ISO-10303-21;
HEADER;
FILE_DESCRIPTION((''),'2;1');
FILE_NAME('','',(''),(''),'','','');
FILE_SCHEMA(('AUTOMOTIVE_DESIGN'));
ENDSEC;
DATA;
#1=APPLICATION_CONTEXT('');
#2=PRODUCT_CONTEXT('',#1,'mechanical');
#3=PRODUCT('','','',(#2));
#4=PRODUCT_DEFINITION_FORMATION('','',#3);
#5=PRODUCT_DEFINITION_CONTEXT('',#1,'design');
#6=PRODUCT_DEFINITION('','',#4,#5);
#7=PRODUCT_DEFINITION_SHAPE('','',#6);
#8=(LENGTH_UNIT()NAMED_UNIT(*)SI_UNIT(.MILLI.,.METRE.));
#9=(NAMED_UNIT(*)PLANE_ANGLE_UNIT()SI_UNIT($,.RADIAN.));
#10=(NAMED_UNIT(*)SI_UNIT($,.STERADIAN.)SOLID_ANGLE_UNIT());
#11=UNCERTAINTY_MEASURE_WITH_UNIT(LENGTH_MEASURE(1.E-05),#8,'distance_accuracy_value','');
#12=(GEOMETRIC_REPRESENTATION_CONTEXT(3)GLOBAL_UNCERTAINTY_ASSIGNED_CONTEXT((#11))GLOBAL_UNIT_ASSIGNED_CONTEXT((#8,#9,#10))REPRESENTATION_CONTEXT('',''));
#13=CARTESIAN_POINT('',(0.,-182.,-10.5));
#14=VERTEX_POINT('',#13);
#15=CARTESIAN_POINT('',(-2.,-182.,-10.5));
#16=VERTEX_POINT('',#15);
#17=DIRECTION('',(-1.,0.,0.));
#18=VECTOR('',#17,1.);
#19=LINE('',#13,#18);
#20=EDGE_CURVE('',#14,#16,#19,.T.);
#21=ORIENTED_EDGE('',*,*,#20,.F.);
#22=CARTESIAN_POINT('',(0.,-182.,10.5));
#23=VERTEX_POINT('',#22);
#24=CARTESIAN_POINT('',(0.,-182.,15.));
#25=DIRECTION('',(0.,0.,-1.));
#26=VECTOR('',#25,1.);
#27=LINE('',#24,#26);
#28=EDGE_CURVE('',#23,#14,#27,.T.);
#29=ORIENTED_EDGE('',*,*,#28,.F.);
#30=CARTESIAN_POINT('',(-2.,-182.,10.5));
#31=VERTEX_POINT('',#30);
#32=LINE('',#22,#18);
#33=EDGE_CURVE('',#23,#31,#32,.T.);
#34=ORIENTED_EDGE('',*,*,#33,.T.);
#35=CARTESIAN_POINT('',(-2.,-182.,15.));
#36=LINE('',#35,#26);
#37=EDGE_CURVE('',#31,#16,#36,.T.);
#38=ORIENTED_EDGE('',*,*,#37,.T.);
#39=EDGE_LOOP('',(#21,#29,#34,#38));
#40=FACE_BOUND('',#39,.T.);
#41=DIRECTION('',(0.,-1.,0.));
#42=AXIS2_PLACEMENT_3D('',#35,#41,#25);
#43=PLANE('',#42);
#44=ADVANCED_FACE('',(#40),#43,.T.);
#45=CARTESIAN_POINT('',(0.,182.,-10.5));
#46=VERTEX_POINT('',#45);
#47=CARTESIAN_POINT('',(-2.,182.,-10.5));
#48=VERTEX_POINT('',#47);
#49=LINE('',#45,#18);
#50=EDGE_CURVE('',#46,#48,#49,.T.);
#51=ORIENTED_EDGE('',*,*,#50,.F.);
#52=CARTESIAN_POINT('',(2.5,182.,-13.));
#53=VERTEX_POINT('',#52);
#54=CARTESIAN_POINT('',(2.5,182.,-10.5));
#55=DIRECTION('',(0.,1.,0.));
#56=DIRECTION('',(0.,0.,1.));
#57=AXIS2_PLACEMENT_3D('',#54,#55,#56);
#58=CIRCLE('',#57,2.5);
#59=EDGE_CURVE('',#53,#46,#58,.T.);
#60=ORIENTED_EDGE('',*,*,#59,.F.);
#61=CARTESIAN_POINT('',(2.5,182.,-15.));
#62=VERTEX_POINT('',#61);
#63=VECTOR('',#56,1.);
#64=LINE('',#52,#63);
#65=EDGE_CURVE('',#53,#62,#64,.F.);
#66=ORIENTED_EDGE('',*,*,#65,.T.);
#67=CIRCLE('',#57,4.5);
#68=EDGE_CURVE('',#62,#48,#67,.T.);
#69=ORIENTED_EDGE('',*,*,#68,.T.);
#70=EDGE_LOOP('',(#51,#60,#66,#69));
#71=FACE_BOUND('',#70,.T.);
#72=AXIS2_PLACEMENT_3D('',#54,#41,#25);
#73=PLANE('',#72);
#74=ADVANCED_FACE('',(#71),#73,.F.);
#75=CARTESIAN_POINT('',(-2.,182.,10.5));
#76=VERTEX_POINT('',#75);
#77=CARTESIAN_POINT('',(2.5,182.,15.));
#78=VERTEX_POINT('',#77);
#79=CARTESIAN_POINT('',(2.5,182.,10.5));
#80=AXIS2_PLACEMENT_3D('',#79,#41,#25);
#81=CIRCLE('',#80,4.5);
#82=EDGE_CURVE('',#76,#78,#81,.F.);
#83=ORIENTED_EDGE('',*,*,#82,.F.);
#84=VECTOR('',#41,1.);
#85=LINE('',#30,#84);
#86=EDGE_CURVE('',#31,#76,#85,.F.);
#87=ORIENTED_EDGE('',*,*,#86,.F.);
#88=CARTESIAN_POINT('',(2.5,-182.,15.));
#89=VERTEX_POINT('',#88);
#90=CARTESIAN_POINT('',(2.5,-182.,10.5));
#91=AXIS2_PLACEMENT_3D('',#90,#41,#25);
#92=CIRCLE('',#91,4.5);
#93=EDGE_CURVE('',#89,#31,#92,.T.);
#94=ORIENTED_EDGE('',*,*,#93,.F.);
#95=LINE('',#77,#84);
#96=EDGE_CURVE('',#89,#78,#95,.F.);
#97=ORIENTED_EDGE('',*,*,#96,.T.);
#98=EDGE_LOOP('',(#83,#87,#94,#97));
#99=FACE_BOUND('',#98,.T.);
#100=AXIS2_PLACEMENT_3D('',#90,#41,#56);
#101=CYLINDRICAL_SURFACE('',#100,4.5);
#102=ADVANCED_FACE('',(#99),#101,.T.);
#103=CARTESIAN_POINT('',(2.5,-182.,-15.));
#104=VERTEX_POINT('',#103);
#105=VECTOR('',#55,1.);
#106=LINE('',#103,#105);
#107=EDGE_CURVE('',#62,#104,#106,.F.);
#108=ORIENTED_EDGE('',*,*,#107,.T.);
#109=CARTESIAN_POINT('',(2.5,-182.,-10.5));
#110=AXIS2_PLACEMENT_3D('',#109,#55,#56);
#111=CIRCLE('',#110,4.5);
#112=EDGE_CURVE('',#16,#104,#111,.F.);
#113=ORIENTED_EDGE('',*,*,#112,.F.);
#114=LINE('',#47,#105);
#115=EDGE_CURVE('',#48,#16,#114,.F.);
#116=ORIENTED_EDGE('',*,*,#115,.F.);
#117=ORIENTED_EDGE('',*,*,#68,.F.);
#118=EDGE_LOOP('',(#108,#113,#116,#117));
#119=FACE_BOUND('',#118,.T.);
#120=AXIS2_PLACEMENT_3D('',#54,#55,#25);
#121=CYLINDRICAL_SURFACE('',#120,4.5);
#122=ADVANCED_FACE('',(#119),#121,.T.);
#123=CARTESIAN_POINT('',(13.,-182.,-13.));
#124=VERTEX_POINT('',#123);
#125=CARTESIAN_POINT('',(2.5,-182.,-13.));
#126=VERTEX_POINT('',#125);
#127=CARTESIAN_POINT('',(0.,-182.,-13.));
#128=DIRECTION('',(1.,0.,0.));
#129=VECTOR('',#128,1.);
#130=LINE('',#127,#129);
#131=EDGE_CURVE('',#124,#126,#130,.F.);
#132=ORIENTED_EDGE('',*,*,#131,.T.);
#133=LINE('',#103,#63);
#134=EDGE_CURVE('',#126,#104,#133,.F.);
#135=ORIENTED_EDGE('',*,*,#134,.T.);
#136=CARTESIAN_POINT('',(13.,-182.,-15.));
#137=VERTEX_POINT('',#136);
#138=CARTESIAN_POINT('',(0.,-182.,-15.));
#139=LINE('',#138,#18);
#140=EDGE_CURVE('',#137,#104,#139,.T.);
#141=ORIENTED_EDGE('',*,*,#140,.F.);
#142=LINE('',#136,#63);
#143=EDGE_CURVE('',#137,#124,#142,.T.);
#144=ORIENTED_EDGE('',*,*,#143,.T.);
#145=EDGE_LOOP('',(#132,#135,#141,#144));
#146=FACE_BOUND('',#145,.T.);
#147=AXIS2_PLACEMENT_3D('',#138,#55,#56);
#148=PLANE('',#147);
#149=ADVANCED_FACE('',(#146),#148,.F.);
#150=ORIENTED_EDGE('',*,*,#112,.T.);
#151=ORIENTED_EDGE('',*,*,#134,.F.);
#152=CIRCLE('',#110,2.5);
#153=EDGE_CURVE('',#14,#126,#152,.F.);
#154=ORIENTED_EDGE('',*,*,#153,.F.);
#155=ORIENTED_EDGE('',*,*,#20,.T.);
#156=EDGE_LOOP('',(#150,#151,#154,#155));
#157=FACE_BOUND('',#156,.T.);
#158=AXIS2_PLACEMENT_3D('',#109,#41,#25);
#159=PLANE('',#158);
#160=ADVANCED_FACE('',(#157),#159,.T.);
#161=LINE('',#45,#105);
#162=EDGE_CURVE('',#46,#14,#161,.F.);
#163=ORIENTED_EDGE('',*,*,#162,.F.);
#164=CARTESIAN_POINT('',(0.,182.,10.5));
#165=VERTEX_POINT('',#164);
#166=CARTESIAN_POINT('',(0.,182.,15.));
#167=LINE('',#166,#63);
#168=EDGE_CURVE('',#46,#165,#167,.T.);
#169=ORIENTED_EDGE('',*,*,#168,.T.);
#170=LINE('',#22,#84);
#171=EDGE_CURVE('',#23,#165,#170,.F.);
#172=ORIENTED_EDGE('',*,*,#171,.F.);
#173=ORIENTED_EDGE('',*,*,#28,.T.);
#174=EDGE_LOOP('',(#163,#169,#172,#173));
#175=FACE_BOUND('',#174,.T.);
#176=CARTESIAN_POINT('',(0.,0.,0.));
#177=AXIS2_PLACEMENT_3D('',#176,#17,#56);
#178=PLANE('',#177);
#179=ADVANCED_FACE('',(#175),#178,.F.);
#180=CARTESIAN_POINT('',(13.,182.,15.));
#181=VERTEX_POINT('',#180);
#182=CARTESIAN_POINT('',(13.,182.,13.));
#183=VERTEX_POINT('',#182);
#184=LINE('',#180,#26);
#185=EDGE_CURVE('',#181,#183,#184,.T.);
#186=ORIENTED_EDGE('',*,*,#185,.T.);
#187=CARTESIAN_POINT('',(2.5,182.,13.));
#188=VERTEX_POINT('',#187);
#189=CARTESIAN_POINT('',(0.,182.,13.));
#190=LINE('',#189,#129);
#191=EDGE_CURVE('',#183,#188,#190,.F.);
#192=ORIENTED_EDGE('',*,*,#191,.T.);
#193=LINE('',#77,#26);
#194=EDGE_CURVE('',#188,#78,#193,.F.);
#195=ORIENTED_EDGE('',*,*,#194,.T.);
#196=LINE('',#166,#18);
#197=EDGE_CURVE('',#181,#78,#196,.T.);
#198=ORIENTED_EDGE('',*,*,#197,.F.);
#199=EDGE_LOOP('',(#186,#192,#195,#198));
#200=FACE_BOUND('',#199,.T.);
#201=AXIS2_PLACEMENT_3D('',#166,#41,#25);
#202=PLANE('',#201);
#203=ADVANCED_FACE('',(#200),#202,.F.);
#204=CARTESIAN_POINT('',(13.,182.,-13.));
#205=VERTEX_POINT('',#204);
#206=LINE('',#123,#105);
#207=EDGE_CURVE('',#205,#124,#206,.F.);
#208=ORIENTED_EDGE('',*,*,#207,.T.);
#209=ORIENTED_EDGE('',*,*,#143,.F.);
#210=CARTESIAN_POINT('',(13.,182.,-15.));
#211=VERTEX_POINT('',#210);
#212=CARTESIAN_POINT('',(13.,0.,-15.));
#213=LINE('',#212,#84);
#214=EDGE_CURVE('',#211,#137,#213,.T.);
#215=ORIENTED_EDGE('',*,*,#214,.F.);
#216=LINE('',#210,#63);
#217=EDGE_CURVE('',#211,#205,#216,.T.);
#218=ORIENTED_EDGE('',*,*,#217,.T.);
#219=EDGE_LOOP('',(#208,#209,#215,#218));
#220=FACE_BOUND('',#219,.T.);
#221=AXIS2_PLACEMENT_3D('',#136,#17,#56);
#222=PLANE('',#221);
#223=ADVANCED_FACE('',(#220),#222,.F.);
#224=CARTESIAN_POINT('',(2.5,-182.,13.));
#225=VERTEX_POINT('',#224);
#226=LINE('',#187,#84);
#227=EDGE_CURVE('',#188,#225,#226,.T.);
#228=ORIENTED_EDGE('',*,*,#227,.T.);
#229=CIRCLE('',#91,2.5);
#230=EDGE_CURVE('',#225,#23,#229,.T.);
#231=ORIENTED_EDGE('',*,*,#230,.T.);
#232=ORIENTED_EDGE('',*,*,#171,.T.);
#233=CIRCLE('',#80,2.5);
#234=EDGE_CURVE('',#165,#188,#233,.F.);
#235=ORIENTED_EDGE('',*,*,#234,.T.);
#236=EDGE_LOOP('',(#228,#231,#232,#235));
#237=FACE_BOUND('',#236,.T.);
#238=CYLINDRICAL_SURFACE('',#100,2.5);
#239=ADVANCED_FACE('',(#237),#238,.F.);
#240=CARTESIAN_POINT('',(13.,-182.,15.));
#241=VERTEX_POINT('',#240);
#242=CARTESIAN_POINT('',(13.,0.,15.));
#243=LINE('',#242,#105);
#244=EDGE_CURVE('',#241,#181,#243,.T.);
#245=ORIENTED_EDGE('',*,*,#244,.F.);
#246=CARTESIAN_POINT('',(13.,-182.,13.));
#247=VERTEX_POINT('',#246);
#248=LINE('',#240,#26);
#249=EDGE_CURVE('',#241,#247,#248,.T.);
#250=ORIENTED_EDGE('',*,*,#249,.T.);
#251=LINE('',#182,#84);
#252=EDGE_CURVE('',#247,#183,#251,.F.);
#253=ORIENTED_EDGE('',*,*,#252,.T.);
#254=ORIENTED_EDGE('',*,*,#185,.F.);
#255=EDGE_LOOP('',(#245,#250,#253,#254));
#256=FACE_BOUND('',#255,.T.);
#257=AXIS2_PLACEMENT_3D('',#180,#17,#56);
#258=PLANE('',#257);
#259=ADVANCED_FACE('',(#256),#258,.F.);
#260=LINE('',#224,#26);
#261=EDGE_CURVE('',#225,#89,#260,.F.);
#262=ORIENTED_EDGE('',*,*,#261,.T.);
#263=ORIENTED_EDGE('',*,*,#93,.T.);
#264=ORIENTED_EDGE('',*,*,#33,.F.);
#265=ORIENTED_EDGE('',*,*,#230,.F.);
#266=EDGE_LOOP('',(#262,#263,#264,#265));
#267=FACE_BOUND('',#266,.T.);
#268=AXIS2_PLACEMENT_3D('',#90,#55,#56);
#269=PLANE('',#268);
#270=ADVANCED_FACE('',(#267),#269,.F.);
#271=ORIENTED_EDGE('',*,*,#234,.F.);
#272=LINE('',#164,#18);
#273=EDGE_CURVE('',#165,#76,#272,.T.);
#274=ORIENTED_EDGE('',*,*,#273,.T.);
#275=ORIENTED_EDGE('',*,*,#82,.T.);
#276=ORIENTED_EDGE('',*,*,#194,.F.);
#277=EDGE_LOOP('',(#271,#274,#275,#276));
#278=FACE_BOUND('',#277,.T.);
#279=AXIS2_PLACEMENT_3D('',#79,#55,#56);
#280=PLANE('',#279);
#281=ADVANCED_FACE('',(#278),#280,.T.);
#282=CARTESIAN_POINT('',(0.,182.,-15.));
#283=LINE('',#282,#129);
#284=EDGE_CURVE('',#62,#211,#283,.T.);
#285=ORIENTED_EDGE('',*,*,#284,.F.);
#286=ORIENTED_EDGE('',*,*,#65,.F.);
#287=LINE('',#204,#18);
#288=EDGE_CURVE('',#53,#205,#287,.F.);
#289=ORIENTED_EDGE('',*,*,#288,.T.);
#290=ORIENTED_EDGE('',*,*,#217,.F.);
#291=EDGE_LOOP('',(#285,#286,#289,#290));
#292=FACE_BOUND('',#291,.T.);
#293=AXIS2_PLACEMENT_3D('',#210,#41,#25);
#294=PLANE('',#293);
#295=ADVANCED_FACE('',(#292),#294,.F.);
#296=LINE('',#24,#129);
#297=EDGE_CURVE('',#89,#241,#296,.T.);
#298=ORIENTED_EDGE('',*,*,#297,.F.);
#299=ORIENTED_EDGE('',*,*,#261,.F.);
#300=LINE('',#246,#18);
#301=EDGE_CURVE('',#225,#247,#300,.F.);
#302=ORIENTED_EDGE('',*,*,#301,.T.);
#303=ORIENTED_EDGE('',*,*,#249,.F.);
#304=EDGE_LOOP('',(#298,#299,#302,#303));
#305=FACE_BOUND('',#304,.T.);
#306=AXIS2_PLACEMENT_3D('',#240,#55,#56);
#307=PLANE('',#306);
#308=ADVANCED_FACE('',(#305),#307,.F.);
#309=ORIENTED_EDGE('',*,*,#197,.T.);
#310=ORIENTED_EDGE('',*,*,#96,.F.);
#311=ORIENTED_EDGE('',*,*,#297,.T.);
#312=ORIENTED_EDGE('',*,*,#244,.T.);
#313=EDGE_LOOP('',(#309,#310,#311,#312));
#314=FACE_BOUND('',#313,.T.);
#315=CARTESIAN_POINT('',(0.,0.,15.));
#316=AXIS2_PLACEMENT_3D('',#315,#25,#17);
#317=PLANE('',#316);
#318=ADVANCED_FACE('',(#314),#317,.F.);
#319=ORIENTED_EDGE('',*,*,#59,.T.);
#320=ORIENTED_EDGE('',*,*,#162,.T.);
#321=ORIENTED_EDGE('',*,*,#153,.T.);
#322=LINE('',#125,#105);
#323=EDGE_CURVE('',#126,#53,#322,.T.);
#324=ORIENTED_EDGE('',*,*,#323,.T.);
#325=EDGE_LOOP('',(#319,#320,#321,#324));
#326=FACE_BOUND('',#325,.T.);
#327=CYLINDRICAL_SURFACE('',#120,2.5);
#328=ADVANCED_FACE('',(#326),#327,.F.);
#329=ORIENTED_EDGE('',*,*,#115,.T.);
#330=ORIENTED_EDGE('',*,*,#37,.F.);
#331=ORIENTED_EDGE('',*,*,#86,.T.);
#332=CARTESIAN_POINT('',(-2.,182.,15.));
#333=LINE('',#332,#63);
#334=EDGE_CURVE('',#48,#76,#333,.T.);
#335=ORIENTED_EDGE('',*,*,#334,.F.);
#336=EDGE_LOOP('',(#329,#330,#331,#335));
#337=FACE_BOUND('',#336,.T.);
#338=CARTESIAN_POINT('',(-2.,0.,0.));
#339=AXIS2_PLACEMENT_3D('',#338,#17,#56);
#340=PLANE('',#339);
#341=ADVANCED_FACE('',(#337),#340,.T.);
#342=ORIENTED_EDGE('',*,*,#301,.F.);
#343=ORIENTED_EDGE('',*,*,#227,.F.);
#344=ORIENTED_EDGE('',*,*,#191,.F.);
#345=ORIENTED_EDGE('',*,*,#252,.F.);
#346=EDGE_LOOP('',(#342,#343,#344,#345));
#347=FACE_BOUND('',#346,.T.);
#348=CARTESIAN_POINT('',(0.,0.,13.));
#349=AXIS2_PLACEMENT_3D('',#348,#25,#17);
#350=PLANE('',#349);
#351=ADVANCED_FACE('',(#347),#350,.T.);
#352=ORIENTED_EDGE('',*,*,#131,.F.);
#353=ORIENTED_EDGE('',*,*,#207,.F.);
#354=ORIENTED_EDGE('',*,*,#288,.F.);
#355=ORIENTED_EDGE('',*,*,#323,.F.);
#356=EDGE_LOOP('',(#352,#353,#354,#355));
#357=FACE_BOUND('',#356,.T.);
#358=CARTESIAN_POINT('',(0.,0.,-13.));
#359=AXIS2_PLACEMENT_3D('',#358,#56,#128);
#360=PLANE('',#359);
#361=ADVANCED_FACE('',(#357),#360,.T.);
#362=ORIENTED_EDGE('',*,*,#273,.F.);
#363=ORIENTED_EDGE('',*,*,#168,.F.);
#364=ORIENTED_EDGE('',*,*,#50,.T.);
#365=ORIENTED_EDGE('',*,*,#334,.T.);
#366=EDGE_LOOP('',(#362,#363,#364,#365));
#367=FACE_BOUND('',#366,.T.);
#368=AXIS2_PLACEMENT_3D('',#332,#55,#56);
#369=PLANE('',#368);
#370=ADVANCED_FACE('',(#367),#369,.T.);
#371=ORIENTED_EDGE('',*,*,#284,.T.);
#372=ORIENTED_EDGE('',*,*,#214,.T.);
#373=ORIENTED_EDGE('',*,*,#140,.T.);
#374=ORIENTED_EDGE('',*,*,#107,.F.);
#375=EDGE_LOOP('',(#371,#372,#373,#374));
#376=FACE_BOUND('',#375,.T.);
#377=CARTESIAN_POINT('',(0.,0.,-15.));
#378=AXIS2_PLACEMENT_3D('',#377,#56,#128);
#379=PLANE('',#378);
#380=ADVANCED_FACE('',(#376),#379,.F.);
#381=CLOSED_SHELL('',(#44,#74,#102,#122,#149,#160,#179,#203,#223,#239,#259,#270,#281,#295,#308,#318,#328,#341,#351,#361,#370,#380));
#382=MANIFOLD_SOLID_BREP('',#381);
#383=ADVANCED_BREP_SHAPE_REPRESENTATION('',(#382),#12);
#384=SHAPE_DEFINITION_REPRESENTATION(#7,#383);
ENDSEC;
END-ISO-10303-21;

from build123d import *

# Parameters (mm, degrees)
SKETCH1_W                      = 30
SKETCH1_H                      = 364
BASE_FLANGE1_DEPTH             = 2
EDGE_FLANGE1_STRIP_W           = 13
EDGE_FLANGE1_STRIP_H           = 2
EDGE_FLANGE1_STRIP_CUT_DEPTH   = 364
EDGE_FLANGE1_STRIP_2_W         = 13
EDGE_FLANGE1_STRIP_2_H         = 2
EDGE_FLANGE1_STRIP_CUT_2_DEPTH = 364
EDGE_FLANGE1_DEPTH             = 364
EDGE_FLANGE1_BEND_DEPTH        = 364


# Sheet-metal steps are written as plain solids
with BuildPart() as part:
    # Sketch1 → Base-Flange1 (new body)
    with BuildSketch(Plane(origin=(0, 0, 0), x_dir=(0, 0, -1), z_dir=(1, 0, 0))):
        Rectangle(SKETCH1_W, SKETCH1_H)
    extrude(amount=-BASE_FLANGE1_DEPTH)

    # Edge-Flange1 strip (across the edge) → Edge-Flange1 strip cut (cut)
    with BuildSketch(Plane(origin=(0, -182, -15), x_dir=(0, 0, 1), z_dir=(0, 1, 0))):
        with Locations((-2, -1)):
            Rectangle(EDGE_FLANGE1_STRIP_W, EDGE_FLANGE1_STRIP_H)
    extrude(amount=EDGE_FLANGE1_STRIP_CUT_DEPTH, mode=Mode.SUBTRACT)

    # Edge-Flange1 strip 2 (across the edge) → Edge-Flange1 strip cut 2 (cut)
    with BuildSketch(Plane(origin=(0, 182, 15), x_dir=(0, 0, -1), z_dir=(0, -1, 0))):
        with Locations((-2, -1)):
            Rectangle(EDGE_FLANGE1_STRIP_2_W, EDGE_FLANGE1_STRIP_2_H)
    extrude(amount=EDGE_FLANGE1_STRIP_CUT_2_DEPTH, mode=Mode.SUBTRACT)

    # Edge-Flange1 section (across the edge) → Edge-Flange1 (add)
    with BuildSketch(Plane(origin=(0, -182, -15), x_dir=(0, 0, 1), z_dir=(0, 1, 0))):
        with BuildLine():
            Line((0, 2.5), (0, 13))
            Line((0, 13), (2, 13))
            Line((2, 13), (2, 2.5))
            ThreePointArc((2, 2.5), (2.732233047, 0.732233047), (4.5, 0))
            Line((4.5, 0), (4.5, -2))
            ThreePointArc((4.5, -2), (1.318019485, -0.681980515), (0, 2.5))
        make_face()
    extrude(amount=EDGE_FLANGE1_DEPTH)

    # Edge-Flange1 section 2 (across the edge) → Edge-Flange1 bend (add)
    with BuildSketch(Plane(origin=(0, 182, 15), x_dir=(0, 0, -1), z_dir=(0, -1, 0))):
        with BuildLine():
            Line((0, 2.5), (0, 13))
            Line((0, 13), (2, 13))
            Line((2, 13), (2, 2.5))
            ThreePointArc((2, 2.5), (2.732233047, 0.732233047), (4.5, 0))
            Line((4.5, 0), (4.5, -2))
            ThreePointArc((4.5, -2), (1.318019485, -0.681980515), (0, 2.5))
        make_face()
    extrude(amount=EDGE_FLANGE1_BEND_DEPTH)


solid = part.part
